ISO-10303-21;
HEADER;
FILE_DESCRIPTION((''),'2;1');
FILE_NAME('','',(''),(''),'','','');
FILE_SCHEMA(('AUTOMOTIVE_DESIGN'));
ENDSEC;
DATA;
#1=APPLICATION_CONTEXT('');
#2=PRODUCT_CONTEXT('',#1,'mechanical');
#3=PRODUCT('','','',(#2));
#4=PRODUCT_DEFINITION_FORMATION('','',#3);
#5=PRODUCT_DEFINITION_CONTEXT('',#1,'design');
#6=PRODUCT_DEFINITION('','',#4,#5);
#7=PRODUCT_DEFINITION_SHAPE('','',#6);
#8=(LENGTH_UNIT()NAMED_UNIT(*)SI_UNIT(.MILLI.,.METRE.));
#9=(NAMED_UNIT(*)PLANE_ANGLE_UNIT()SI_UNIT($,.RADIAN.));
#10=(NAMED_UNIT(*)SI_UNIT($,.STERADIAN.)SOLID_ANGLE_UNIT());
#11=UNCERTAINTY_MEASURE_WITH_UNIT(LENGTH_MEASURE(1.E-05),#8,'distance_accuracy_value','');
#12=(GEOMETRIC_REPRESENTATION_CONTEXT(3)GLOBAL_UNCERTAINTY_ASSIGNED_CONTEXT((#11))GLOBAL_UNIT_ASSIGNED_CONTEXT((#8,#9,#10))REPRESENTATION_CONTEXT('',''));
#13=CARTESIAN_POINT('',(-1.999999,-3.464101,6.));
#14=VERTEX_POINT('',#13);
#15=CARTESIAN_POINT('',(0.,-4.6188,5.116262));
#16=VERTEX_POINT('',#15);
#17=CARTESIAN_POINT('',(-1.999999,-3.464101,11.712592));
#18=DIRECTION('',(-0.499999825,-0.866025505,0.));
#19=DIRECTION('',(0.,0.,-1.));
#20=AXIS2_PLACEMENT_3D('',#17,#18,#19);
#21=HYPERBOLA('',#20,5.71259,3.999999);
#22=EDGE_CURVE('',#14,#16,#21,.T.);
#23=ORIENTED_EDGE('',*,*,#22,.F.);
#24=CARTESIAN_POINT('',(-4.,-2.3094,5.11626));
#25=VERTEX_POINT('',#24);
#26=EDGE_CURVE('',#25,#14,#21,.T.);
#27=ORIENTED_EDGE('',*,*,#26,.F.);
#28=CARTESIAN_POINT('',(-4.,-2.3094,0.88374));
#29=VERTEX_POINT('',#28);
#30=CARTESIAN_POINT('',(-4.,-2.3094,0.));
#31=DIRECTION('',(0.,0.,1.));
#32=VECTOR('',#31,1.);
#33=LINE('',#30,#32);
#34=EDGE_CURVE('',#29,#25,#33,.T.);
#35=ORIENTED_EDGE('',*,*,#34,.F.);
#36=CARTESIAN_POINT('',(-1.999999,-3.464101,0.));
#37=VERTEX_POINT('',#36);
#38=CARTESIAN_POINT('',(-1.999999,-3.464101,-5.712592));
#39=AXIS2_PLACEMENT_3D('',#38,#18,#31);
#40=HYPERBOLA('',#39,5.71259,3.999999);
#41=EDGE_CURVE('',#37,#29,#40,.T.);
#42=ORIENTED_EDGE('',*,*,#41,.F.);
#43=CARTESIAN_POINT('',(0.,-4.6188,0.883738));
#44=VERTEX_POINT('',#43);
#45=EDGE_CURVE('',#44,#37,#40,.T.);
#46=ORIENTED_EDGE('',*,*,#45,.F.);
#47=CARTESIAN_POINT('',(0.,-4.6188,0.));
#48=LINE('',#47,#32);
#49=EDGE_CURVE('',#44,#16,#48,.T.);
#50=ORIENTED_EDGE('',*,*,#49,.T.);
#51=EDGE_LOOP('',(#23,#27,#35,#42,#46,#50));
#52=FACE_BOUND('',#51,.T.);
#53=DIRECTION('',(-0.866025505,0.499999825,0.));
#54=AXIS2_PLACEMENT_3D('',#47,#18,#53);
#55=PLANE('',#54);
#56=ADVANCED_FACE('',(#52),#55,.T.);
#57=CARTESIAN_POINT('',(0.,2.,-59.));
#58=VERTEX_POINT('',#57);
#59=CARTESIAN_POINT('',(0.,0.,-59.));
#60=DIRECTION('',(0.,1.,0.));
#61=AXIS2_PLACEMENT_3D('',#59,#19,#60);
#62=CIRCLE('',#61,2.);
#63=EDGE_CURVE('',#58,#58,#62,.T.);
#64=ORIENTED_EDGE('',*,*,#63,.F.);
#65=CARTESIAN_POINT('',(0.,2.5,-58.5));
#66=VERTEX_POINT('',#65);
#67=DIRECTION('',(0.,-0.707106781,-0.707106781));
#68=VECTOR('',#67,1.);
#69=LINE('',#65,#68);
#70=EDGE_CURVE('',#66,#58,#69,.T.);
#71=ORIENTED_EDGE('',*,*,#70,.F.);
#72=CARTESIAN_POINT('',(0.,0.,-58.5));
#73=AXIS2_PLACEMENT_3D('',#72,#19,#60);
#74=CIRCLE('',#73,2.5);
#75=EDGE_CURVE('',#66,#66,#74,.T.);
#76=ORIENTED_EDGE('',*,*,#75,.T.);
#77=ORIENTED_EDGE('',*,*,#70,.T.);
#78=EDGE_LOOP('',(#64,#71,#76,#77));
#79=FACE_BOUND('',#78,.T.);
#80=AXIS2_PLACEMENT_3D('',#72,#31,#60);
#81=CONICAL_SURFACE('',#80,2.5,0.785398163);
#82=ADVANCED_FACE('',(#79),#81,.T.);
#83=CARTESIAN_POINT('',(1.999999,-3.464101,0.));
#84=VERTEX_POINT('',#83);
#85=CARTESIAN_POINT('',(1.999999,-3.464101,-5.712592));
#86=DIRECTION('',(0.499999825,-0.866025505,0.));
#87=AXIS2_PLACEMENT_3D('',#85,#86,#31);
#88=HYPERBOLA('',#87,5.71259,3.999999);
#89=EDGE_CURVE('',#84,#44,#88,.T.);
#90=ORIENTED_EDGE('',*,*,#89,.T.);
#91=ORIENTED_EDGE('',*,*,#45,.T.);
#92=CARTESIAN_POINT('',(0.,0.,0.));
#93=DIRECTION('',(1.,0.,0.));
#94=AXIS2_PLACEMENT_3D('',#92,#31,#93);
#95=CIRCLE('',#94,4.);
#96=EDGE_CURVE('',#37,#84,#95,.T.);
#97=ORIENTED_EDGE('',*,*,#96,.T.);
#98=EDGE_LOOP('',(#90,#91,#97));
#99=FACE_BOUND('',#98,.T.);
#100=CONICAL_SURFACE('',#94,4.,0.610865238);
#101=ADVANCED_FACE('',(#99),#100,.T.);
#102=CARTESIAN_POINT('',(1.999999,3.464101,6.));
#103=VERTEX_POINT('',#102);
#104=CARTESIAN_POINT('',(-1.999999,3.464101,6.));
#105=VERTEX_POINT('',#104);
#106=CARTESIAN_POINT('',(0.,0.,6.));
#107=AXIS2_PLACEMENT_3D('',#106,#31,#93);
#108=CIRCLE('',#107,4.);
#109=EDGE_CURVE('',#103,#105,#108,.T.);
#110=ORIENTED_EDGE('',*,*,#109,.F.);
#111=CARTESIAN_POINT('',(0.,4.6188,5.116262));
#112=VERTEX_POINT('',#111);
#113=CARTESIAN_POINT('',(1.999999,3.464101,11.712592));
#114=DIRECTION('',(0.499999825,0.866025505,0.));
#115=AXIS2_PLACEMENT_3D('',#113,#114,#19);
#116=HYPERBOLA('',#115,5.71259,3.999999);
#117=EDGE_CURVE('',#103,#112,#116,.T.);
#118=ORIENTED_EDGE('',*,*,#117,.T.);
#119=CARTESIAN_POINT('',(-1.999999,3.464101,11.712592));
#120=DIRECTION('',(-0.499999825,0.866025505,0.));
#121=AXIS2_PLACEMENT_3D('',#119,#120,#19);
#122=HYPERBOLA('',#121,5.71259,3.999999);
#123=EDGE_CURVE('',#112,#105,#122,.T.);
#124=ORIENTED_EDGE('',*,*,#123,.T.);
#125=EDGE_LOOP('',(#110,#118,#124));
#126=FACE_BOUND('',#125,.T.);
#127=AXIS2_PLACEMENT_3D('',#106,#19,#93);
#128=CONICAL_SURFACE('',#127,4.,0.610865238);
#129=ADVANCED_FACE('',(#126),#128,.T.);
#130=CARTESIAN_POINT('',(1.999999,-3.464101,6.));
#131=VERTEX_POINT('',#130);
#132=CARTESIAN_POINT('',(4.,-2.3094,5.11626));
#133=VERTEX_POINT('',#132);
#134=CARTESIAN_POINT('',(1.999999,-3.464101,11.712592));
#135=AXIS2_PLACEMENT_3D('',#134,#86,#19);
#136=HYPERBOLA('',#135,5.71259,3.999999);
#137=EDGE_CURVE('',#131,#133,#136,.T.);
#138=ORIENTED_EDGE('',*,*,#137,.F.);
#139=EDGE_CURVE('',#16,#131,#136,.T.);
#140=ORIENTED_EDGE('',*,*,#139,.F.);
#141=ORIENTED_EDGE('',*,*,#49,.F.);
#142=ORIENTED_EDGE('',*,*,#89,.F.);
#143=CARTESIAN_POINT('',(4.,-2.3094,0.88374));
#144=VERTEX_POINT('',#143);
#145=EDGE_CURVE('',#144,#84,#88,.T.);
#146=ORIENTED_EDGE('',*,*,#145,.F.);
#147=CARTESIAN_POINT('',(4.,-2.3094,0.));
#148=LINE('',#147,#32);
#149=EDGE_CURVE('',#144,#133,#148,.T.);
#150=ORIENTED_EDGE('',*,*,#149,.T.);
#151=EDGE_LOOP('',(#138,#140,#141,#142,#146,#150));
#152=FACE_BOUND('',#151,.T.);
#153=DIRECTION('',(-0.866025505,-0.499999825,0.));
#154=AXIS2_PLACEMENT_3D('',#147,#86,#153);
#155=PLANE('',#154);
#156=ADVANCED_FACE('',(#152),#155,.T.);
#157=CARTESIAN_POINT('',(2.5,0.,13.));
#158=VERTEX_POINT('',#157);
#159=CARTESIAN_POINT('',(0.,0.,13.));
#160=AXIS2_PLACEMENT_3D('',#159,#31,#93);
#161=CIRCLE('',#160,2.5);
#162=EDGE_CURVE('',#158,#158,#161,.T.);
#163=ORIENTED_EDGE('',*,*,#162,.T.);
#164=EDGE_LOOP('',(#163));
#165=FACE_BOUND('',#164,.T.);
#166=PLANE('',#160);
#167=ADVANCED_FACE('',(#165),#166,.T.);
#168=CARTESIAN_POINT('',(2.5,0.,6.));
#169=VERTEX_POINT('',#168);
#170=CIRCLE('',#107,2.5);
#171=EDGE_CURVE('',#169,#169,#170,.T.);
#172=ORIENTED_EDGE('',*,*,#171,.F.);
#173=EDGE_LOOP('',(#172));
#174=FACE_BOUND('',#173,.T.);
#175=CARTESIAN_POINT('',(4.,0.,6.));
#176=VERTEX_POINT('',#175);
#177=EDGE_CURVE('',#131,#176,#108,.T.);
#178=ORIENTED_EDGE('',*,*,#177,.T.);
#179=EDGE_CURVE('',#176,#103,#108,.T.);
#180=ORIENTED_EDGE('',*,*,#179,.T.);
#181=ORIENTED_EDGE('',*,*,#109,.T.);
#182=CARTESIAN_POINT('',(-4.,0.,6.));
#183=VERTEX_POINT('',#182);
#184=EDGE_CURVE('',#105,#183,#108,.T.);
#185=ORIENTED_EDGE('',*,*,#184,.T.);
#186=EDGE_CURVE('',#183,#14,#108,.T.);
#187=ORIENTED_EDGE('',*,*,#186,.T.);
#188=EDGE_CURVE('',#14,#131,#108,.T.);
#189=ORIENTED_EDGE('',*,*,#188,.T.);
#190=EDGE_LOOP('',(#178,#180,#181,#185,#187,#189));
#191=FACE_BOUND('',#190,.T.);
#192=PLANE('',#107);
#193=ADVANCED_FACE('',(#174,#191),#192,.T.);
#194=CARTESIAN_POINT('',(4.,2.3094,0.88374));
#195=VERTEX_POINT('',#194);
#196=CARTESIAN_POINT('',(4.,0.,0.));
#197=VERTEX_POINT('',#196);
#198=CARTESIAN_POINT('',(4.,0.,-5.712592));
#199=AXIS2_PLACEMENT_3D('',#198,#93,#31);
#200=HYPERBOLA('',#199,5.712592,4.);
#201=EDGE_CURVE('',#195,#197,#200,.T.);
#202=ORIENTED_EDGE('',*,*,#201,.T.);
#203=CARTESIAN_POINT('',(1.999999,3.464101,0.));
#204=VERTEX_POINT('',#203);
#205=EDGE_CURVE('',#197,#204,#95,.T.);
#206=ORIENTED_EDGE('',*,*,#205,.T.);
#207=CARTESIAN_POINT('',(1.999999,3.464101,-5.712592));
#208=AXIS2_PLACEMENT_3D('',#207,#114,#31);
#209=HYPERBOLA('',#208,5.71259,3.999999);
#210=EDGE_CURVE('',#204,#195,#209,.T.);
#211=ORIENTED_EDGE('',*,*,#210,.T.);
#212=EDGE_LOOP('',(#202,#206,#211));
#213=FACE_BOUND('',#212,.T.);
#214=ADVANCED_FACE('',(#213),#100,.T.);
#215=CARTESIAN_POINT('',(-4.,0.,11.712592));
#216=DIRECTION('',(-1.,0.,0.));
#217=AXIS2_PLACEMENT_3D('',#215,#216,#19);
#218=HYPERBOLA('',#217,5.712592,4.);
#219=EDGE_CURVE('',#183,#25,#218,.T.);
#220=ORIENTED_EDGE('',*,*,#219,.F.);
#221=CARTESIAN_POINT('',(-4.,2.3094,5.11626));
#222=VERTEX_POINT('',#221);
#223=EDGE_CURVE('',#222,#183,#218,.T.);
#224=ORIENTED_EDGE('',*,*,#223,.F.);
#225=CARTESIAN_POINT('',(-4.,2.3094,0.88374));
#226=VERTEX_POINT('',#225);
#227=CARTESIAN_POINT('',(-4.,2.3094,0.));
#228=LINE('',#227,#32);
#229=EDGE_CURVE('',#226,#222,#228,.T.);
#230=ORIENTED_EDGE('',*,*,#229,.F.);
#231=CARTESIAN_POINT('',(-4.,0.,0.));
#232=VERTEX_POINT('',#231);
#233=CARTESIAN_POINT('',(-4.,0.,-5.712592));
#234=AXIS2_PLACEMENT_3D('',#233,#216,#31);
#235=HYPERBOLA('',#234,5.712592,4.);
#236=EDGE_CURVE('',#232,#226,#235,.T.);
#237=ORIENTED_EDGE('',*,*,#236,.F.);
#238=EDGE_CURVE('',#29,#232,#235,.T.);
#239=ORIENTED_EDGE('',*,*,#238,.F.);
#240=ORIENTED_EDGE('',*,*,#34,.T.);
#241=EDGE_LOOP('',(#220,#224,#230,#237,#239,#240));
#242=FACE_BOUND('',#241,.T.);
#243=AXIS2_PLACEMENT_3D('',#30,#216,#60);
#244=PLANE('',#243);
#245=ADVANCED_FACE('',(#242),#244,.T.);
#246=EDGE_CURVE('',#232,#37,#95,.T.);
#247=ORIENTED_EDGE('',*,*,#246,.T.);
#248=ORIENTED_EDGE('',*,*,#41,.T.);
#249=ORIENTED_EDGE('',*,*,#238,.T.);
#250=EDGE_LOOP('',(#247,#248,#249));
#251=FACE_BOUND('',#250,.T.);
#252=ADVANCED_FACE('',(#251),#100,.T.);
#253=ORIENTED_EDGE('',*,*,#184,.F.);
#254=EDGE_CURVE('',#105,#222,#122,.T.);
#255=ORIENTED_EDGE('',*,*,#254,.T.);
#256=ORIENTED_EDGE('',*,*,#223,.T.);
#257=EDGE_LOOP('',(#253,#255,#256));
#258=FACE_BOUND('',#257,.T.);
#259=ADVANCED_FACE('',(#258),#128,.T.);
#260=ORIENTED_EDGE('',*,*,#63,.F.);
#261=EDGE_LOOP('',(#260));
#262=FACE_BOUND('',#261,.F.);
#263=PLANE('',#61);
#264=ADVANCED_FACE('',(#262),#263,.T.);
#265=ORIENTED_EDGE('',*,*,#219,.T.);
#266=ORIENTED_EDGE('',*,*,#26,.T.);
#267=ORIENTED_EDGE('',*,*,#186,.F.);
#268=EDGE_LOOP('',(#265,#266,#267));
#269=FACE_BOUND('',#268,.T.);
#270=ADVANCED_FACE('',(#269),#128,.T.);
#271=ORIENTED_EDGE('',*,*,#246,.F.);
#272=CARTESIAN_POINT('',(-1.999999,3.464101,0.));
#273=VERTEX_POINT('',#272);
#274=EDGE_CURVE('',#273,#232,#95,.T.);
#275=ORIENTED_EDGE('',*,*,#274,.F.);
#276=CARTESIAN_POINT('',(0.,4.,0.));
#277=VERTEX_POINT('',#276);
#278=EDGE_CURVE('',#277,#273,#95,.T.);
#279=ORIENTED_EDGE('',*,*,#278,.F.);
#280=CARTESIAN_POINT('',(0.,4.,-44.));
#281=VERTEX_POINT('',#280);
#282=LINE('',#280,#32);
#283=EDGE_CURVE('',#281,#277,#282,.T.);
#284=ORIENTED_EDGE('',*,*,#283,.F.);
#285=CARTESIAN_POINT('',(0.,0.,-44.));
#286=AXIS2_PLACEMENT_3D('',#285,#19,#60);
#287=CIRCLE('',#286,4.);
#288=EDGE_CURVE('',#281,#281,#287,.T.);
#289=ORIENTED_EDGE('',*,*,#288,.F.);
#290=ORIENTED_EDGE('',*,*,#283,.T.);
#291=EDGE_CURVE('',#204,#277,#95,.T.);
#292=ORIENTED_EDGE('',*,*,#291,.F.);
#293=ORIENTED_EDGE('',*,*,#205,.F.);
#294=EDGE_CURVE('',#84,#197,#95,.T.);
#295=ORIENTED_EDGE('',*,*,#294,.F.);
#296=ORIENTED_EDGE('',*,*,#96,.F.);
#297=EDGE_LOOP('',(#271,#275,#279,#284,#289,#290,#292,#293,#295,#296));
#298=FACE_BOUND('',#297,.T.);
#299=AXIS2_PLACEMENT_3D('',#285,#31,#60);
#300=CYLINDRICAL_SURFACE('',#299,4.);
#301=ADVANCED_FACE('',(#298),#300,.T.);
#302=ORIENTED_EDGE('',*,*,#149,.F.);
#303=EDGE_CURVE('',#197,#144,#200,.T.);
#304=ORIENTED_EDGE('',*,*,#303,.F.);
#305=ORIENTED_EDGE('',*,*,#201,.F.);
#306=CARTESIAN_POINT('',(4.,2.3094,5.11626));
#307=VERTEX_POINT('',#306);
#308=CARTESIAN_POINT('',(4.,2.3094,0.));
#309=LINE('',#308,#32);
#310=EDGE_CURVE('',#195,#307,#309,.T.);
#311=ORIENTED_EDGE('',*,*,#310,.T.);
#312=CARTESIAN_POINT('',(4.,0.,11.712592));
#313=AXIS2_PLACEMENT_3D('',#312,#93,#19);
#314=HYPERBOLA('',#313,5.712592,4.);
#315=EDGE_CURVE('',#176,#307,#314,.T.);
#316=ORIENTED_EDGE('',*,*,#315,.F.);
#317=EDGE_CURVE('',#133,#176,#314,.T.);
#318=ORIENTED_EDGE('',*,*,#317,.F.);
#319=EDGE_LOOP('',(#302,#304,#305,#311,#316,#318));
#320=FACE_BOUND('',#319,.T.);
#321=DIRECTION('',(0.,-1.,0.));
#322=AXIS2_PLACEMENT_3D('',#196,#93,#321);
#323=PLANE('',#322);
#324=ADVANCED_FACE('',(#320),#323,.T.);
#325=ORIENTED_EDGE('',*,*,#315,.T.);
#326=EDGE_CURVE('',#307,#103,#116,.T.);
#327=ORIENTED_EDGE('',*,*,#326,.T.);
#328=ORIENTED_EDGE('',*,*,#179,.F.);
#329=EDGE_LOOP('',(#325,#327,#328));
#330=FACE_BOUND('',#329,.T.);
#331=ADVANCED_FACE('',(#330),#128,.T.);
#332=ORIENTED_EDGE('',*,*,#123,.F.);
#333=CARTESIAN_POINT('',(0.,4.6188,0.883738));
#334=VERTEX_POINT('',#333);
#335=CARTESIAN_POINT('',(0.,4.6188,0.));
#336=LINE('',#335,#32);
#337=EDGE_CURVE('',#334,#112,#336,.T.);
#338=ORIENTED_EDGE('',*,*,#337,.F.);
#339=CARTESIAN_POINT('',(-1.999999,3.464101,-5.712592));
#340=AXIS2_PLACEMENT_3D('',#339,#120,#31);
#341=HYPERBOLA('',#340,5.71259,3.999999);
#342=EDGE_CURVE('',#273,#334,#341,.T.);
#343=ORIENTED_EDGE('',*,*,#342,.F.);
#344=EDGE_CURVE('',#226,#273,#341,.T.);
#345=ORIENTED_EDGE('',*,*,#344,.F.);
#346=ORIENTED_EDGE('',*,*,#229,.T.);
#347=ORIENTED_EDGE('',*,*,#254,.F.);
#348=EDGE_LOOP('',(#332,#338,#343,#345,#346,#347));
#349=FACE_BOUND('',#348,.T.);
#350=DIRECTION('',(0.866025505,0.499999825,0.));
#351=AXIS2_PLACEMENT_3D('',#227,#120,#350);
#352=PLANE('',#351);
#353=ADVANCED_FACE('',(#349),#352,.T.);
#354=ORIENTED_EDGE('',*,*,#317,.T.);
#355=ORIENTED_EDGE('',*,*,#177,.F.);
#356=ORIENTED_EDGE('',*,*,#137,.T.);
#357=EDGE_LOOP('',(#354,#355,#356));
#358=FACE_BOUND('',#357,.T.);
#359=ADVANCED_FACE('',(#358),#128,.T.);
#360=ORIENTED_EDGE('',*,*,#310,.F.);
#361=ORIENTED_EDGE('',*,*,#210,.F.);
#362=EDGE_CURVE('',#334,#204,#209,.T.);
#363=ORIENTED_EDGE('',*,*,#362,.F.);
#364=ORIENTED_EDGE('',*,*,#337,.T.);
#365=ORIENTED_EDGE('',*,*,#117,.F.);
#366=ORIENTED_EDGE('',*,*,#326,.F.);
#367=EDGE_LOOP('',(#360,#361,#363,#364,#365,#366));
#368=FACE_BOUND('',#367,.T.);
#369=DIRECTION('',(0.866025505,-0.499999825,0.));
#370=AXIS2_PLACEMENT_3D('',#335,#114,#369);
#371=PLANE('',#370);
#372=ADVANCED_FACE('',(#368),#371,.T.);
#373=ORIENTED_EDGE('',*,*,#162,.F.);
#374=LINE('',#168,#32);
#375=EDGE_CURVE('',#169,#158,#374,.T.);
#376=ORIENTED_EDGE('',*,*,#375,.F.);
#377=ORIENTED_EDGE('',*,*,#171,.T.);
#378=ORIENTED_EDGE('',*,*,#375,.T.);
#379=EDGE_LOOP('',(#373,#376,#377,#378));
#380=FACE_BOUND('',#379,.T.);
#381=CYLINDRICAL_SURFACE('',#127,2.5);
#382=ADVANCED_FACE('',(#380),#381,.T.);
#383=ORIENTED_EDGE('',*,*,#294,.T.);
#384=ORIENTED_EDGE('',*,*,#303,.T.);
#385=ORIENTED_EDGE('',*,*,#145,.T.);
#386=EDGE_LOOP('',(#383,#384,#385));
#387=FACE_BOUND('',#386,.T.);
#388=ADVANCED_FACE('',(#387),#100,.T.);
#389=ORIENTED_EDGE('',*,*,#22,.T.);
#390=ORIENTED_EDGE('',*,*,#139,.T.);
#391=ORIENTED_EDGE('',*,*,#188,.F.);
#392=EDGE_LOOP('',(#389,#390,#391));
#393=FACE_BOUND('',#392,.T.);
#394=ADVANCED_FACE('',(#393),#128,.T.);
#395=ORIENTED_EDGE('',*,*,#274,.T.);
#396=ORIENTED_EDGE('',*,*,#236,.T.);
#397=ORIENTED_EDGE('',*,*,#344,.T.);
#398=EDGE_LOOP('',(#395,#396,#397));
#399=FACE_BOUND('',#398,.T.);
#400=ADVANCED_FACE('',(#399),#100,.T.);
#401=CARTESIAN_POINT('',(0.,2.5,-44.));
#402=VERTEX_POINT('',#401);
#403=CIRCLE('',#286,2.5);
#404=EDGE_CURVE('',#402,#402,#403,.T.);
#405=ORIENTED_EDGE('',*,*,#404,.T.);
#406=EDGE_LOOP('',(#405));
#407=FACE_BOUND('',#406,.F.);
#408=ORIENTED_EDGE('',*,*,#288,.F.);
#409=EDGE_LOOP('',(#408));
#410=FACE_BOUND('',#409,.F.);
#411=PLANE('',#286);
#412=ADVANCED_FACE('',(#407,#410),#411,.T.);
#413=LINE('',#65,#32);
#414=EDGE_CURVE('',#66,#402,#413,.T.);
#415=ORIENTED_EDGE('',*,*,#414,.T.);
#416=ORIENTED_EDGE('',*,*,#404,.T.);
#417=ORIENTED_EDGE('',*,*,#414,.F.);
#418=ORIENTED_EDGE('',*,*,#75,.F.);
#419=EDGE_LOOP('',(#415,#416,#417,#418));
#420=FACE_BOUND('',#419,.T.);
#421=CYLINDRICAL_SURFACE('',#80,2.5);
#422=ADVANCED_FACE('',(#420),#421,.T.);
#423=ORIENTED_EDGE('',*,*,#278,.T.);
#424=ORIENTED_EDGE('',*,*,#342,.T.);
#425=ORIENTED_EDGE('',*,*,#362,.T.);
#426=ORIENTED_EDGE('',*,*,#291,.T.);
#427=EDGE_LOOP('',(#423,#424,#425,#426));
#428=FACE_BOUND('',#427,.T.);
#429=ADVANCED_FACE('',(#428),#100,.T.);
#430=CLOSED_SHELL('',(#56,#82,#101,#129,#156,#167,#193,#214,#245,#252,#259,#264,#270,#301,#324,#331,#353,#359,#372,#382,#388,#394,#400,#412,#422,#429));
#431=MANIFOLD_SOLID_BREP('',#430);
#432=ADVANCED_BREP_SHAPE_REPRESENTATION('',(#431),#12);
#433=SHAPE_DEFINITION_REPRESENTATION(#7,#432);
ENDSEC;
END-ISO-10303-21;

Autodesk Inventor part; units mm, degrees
ref_plane "YZ Plane" through (0, 0, 0) normal (1, 0, 0) x (0, 1, 0)
ref_plane "XZ Plane" through (0, 0, 0) normal (0, 1, 0) x (-1, 0, 0)
ref_plane "XY Plane" through (0, 0, 0) normal (0, 0, 1) x (1, 0, 0)
sketch "Sketch1" plane through (0, 0, 0) normal (0, 0, 1) x (1, 0, 0)
  circle A0 centre (0, 0) radius 4
  line L0 (-4, 2.3094) -> (0, 4.6188)
  line L1 (0, 4.6188) -> (4, 2.3094)
  line L2 (4, 2.3094) -> (4, -2.3094)
  line L3 (4, -2.3094) -> (0, -4.6188)
  line L4 (0, -4.6188) -> (-4, -2.3094)
  line L5 (-4, -2.3094) -> (-4, 2.3094)
  point P0 (-4, 0)
  dimension "d0" = 8
extrude "Extrusion1" add sketch "Sketch1" along normal blind 6
sketch "Sketch2" plane through (0, 0, 6) normal (0, 0, 1) x (1, 0, 0)
  circle A0 centre (0, 0) radius 4 projected
extrude "Extrusion2" cut sketch "Sketch2" against normal blind 6 draft 35 keep common part
extrude "Extrusion3" cut sketch "Sketch1" along normal blind 6 draft 35 contours A0 keep common part
sketch "Sketch3" plane through (0, 0, 0) normal (1, 0, 0) x (0, 1, 0)
  line L0 (0, 0) -> (-3.4641, 0) projected
  line L1 (0, 0) -> (0, -59)
  line L2 (0, -59) -> (2, -59)
  line L3 (2.5, -58.5) -> (2.5, -44)
  line L4 (2.5, -44) -> (4, -44)
  line L5 (4, -44) -> (4, 0)
  line L6 (0, 0) -> (27.6878, 0) construction
  line L7 (3.4641, 0) -> (0, 0) projected
  line L8 (4, 0) -> (0, 0)
  line L9 (2.5, -58.5) -> (2, -59)
  point P0 (2.5, -59)
  dimension "d7" = 4
  dimension "d8" = 2.5
  dimension "d9" = 44
  dimension "d10" = 15
  dimension "d11" = 0.5
  dimension "d12" = 0.5
revolve "Revolution1" add sketch "Sketch3" angle 360 about axis through (0, 0, 0) along (0, 0, -1)
sketch "Sketch4" plane through (0, 0, 6) normal (0, 0, 1) x (1, 0, 0)
  circle A0 centre (0, 0) radius 2 projected
  circle A1 centre (0, 0) radius 2.5
  point P0 (0, 0)
  dimension "d14" = 5
extrude "Extrusion4" add sketch "Sketch4" along normal blind 7 contours A0 | A1
thread "Thread1" size "M5x0.8" class "6g" standard "ANSI Metric M Profile" full length
thread "Thread2" size "M5x0.8" class "6g" standard "ANSI Metric M Profile" full length
equation "\"d12\" = d11"
properties part number "Component 9 (Suspension Spacer)"
